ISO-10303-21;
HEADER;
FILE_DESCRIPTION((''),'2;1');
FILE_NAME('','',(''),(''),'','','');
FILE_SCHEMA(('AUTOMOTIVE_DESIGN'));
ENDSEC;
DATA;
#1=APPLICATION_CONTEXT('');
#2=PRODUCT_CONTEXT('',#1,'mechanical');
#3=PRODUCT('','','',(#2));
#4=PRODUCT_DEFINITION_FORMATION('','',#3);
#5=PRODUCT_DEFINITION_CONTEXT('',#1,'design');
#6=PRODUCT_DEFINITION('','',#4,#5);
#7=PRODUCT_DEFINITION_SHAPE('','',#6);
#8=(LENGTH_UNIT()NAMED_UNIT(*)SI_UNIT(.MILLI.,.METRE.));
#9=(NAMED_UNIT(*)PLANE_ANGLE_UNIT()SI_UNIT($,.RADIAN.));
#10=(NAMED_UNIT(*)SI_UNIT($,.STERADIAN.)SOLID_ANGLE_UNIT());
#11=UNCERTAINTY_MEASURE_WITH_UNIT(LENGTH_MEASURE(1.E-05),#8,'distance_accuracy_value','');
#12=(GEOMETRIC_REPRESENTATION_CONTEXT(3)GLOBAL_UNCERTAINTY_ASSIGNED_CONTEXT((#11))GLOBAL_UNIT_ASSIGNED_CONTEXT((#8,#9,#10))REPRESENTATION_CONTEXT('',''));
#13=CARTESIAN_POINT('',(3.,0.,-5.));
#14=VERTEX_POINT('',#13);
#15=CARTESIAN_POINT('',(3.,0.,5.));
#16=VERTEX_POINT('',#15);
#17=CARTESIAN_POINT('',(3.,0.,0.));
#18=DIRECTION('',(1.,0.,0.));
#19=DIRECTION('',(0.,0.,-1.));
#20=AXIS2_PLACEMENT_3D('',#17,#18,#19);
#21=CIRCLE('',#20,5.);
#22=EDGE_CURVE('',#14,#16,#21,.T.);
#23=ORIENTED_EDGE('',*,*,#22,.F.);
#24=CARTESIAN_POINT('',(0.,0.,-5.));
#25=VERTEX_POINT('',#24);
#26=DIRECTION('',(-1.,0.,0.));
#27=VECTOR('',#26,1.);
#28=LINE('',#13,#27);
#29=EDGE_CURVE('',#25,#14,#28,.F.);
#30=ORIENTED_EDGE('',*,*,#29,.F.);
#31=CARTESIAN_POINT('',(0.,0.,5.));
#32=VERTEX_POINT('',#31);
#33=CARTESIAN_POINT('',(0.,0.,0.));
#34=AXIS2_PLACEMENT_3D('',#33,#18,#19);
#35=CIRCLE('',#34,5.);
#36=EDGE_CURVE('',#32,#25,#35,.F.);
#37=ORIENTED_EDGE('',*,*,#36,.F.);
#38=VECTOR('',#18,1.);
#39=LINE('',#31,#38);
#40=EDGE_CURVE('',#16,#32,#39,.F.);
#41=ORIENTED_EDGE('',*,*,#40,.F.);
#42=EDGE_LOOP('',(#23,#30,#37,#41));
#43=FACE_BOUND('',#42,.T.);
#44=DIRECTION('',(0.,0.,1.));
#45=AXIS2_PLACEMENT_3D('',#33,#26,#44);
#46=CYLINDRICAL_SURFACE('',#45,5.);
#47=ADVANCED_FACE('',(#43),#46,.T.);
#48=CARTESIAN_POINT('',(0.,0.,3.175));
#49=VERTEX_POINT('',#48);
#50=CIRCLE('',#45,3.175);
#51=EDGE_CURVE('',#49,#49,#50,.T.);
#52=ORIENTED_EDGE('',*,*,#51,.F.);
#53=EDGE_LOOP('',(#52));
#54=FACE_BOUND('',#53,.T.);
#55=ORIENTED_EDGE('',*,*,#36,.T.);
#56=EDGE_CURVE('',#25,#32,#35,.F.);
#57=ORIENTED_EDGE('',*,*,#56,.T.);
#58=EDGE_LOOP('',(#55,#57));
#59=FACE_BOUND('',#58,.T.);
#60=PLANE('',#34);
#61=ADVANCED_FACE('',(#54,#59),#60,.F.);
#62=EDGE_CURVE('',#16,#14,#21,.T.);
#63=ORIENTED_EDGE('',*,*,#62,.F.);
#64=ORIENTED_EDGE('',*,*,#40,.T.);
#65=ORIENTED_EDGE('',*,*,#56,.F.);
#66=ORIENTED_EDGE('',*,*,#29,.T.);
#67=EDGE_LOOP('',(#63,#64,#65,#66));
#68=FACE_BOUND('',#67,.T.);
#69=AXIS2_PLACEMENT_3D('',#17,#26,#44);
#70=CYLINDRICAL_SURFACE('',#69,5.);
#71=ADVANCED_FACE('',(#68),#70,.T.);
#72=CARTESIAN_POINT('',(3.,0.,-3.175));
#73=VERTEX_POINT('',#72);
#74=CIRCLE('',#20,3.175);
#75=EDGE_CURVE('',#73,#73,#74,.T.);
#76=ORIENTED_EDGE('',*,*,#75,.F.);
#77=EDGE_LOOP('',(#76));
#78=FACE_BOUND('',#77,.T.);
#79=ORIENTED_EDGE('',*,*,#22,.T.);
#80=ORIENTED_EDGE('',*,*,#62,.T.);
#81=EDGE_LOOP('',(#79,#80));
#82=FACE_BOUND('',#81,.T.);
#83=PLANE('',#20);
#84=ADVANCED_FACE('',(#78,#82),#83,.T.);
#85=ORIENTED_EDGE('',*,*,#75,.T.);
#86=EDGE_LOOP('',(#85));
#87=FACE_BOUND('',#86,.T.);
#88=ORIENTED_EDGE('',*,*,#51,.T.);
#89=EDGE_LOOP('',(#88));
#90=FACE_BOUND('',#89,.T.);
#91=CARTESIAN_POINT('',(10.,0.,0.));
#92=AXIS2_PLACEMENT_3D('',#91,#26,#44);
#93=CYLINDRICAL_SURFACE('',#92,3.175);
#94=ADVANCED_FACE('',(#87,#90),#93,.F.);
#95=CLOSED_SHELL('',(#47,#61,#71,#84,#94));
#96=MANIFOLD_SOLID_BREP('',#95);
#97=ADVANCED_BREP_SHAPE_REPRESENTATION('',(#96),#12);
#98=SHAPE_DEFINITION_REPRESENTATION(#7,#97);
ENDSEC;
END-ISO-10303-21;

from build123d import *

# Parameters (mm, degrees)
SKETCH1_W           = 10
SKETCH1_H           = 10
BOSS_EXTRUDE1_DEPTH = 3
SKETCH2_R           = 3.175
CUT_EXTRUDE1_DEPTH  = 10
FILLET1_RADIUS      = 5
FILLET1_LENGTH      = 3
FILLET2_R           = 5


with BuildPart() as part:
    # Sketch1 → Boss-Extrude1 (new body)
    with BuildSketch(Plane(origin=(0, 0, 0), x_dir=(0, 0, -1), z_dir=(1, 0, 0))):
        Rectangle(SKETCH1_W, SKETCH1_H)
    extrude(amount=BOSS_EXTRUDE1_DEPTH)

    # Sketch2 → Cut-Extrude1 (cut)
    with BuildSketch(Plane.ZY):
        Circle(SKETCH2_R)
    extrude(amount=-CUT_EXTRUDE1_DEPTH, mode=Mode.SUBTRACT)

    # Fillet1: full round fillet: the end face becomes a half cylinder, R = half its width
    fillet1_face = Plane((1.5, 5, 0), x_dir=(1, 0, 0), z_dir=(0, 1, 0))  # on the end face: x along it, z out of the body
    fillet1_slab = fillet1_face.offset(-FILLET1_RADIUS / 2) * Box(FILLET1_LENGTH, 2 * FILLET1_RADIUS, FILLET1_RADIUS, mode=Mode.PRIVATE)  # the body's end, R deep
    fillet1_round = Plane((1.5, 0, 0), x_dir=(0, 1, 0), z_dir=(1, 0, 0)) * Cylinder(FILLET1_RADIUS, FILLET1_LENGTH, mode=Mode.PRIVATE)  # its axis R under the face
    add(fillet1_slab - fillet1_round, mode=Mode.SUBTRACT)

    # Fillet2
    fillet2_edges = [part.edges().sort_by_distance(p)[0] for p in [
        (1.5, -5, -5),
        (1.5, -5, 5),
    ]]
    fillet(fillet2_edges, radius=FILLET2_R - 0.0001)  # a hair under: the kernel refuses the full size


solid = part.part
